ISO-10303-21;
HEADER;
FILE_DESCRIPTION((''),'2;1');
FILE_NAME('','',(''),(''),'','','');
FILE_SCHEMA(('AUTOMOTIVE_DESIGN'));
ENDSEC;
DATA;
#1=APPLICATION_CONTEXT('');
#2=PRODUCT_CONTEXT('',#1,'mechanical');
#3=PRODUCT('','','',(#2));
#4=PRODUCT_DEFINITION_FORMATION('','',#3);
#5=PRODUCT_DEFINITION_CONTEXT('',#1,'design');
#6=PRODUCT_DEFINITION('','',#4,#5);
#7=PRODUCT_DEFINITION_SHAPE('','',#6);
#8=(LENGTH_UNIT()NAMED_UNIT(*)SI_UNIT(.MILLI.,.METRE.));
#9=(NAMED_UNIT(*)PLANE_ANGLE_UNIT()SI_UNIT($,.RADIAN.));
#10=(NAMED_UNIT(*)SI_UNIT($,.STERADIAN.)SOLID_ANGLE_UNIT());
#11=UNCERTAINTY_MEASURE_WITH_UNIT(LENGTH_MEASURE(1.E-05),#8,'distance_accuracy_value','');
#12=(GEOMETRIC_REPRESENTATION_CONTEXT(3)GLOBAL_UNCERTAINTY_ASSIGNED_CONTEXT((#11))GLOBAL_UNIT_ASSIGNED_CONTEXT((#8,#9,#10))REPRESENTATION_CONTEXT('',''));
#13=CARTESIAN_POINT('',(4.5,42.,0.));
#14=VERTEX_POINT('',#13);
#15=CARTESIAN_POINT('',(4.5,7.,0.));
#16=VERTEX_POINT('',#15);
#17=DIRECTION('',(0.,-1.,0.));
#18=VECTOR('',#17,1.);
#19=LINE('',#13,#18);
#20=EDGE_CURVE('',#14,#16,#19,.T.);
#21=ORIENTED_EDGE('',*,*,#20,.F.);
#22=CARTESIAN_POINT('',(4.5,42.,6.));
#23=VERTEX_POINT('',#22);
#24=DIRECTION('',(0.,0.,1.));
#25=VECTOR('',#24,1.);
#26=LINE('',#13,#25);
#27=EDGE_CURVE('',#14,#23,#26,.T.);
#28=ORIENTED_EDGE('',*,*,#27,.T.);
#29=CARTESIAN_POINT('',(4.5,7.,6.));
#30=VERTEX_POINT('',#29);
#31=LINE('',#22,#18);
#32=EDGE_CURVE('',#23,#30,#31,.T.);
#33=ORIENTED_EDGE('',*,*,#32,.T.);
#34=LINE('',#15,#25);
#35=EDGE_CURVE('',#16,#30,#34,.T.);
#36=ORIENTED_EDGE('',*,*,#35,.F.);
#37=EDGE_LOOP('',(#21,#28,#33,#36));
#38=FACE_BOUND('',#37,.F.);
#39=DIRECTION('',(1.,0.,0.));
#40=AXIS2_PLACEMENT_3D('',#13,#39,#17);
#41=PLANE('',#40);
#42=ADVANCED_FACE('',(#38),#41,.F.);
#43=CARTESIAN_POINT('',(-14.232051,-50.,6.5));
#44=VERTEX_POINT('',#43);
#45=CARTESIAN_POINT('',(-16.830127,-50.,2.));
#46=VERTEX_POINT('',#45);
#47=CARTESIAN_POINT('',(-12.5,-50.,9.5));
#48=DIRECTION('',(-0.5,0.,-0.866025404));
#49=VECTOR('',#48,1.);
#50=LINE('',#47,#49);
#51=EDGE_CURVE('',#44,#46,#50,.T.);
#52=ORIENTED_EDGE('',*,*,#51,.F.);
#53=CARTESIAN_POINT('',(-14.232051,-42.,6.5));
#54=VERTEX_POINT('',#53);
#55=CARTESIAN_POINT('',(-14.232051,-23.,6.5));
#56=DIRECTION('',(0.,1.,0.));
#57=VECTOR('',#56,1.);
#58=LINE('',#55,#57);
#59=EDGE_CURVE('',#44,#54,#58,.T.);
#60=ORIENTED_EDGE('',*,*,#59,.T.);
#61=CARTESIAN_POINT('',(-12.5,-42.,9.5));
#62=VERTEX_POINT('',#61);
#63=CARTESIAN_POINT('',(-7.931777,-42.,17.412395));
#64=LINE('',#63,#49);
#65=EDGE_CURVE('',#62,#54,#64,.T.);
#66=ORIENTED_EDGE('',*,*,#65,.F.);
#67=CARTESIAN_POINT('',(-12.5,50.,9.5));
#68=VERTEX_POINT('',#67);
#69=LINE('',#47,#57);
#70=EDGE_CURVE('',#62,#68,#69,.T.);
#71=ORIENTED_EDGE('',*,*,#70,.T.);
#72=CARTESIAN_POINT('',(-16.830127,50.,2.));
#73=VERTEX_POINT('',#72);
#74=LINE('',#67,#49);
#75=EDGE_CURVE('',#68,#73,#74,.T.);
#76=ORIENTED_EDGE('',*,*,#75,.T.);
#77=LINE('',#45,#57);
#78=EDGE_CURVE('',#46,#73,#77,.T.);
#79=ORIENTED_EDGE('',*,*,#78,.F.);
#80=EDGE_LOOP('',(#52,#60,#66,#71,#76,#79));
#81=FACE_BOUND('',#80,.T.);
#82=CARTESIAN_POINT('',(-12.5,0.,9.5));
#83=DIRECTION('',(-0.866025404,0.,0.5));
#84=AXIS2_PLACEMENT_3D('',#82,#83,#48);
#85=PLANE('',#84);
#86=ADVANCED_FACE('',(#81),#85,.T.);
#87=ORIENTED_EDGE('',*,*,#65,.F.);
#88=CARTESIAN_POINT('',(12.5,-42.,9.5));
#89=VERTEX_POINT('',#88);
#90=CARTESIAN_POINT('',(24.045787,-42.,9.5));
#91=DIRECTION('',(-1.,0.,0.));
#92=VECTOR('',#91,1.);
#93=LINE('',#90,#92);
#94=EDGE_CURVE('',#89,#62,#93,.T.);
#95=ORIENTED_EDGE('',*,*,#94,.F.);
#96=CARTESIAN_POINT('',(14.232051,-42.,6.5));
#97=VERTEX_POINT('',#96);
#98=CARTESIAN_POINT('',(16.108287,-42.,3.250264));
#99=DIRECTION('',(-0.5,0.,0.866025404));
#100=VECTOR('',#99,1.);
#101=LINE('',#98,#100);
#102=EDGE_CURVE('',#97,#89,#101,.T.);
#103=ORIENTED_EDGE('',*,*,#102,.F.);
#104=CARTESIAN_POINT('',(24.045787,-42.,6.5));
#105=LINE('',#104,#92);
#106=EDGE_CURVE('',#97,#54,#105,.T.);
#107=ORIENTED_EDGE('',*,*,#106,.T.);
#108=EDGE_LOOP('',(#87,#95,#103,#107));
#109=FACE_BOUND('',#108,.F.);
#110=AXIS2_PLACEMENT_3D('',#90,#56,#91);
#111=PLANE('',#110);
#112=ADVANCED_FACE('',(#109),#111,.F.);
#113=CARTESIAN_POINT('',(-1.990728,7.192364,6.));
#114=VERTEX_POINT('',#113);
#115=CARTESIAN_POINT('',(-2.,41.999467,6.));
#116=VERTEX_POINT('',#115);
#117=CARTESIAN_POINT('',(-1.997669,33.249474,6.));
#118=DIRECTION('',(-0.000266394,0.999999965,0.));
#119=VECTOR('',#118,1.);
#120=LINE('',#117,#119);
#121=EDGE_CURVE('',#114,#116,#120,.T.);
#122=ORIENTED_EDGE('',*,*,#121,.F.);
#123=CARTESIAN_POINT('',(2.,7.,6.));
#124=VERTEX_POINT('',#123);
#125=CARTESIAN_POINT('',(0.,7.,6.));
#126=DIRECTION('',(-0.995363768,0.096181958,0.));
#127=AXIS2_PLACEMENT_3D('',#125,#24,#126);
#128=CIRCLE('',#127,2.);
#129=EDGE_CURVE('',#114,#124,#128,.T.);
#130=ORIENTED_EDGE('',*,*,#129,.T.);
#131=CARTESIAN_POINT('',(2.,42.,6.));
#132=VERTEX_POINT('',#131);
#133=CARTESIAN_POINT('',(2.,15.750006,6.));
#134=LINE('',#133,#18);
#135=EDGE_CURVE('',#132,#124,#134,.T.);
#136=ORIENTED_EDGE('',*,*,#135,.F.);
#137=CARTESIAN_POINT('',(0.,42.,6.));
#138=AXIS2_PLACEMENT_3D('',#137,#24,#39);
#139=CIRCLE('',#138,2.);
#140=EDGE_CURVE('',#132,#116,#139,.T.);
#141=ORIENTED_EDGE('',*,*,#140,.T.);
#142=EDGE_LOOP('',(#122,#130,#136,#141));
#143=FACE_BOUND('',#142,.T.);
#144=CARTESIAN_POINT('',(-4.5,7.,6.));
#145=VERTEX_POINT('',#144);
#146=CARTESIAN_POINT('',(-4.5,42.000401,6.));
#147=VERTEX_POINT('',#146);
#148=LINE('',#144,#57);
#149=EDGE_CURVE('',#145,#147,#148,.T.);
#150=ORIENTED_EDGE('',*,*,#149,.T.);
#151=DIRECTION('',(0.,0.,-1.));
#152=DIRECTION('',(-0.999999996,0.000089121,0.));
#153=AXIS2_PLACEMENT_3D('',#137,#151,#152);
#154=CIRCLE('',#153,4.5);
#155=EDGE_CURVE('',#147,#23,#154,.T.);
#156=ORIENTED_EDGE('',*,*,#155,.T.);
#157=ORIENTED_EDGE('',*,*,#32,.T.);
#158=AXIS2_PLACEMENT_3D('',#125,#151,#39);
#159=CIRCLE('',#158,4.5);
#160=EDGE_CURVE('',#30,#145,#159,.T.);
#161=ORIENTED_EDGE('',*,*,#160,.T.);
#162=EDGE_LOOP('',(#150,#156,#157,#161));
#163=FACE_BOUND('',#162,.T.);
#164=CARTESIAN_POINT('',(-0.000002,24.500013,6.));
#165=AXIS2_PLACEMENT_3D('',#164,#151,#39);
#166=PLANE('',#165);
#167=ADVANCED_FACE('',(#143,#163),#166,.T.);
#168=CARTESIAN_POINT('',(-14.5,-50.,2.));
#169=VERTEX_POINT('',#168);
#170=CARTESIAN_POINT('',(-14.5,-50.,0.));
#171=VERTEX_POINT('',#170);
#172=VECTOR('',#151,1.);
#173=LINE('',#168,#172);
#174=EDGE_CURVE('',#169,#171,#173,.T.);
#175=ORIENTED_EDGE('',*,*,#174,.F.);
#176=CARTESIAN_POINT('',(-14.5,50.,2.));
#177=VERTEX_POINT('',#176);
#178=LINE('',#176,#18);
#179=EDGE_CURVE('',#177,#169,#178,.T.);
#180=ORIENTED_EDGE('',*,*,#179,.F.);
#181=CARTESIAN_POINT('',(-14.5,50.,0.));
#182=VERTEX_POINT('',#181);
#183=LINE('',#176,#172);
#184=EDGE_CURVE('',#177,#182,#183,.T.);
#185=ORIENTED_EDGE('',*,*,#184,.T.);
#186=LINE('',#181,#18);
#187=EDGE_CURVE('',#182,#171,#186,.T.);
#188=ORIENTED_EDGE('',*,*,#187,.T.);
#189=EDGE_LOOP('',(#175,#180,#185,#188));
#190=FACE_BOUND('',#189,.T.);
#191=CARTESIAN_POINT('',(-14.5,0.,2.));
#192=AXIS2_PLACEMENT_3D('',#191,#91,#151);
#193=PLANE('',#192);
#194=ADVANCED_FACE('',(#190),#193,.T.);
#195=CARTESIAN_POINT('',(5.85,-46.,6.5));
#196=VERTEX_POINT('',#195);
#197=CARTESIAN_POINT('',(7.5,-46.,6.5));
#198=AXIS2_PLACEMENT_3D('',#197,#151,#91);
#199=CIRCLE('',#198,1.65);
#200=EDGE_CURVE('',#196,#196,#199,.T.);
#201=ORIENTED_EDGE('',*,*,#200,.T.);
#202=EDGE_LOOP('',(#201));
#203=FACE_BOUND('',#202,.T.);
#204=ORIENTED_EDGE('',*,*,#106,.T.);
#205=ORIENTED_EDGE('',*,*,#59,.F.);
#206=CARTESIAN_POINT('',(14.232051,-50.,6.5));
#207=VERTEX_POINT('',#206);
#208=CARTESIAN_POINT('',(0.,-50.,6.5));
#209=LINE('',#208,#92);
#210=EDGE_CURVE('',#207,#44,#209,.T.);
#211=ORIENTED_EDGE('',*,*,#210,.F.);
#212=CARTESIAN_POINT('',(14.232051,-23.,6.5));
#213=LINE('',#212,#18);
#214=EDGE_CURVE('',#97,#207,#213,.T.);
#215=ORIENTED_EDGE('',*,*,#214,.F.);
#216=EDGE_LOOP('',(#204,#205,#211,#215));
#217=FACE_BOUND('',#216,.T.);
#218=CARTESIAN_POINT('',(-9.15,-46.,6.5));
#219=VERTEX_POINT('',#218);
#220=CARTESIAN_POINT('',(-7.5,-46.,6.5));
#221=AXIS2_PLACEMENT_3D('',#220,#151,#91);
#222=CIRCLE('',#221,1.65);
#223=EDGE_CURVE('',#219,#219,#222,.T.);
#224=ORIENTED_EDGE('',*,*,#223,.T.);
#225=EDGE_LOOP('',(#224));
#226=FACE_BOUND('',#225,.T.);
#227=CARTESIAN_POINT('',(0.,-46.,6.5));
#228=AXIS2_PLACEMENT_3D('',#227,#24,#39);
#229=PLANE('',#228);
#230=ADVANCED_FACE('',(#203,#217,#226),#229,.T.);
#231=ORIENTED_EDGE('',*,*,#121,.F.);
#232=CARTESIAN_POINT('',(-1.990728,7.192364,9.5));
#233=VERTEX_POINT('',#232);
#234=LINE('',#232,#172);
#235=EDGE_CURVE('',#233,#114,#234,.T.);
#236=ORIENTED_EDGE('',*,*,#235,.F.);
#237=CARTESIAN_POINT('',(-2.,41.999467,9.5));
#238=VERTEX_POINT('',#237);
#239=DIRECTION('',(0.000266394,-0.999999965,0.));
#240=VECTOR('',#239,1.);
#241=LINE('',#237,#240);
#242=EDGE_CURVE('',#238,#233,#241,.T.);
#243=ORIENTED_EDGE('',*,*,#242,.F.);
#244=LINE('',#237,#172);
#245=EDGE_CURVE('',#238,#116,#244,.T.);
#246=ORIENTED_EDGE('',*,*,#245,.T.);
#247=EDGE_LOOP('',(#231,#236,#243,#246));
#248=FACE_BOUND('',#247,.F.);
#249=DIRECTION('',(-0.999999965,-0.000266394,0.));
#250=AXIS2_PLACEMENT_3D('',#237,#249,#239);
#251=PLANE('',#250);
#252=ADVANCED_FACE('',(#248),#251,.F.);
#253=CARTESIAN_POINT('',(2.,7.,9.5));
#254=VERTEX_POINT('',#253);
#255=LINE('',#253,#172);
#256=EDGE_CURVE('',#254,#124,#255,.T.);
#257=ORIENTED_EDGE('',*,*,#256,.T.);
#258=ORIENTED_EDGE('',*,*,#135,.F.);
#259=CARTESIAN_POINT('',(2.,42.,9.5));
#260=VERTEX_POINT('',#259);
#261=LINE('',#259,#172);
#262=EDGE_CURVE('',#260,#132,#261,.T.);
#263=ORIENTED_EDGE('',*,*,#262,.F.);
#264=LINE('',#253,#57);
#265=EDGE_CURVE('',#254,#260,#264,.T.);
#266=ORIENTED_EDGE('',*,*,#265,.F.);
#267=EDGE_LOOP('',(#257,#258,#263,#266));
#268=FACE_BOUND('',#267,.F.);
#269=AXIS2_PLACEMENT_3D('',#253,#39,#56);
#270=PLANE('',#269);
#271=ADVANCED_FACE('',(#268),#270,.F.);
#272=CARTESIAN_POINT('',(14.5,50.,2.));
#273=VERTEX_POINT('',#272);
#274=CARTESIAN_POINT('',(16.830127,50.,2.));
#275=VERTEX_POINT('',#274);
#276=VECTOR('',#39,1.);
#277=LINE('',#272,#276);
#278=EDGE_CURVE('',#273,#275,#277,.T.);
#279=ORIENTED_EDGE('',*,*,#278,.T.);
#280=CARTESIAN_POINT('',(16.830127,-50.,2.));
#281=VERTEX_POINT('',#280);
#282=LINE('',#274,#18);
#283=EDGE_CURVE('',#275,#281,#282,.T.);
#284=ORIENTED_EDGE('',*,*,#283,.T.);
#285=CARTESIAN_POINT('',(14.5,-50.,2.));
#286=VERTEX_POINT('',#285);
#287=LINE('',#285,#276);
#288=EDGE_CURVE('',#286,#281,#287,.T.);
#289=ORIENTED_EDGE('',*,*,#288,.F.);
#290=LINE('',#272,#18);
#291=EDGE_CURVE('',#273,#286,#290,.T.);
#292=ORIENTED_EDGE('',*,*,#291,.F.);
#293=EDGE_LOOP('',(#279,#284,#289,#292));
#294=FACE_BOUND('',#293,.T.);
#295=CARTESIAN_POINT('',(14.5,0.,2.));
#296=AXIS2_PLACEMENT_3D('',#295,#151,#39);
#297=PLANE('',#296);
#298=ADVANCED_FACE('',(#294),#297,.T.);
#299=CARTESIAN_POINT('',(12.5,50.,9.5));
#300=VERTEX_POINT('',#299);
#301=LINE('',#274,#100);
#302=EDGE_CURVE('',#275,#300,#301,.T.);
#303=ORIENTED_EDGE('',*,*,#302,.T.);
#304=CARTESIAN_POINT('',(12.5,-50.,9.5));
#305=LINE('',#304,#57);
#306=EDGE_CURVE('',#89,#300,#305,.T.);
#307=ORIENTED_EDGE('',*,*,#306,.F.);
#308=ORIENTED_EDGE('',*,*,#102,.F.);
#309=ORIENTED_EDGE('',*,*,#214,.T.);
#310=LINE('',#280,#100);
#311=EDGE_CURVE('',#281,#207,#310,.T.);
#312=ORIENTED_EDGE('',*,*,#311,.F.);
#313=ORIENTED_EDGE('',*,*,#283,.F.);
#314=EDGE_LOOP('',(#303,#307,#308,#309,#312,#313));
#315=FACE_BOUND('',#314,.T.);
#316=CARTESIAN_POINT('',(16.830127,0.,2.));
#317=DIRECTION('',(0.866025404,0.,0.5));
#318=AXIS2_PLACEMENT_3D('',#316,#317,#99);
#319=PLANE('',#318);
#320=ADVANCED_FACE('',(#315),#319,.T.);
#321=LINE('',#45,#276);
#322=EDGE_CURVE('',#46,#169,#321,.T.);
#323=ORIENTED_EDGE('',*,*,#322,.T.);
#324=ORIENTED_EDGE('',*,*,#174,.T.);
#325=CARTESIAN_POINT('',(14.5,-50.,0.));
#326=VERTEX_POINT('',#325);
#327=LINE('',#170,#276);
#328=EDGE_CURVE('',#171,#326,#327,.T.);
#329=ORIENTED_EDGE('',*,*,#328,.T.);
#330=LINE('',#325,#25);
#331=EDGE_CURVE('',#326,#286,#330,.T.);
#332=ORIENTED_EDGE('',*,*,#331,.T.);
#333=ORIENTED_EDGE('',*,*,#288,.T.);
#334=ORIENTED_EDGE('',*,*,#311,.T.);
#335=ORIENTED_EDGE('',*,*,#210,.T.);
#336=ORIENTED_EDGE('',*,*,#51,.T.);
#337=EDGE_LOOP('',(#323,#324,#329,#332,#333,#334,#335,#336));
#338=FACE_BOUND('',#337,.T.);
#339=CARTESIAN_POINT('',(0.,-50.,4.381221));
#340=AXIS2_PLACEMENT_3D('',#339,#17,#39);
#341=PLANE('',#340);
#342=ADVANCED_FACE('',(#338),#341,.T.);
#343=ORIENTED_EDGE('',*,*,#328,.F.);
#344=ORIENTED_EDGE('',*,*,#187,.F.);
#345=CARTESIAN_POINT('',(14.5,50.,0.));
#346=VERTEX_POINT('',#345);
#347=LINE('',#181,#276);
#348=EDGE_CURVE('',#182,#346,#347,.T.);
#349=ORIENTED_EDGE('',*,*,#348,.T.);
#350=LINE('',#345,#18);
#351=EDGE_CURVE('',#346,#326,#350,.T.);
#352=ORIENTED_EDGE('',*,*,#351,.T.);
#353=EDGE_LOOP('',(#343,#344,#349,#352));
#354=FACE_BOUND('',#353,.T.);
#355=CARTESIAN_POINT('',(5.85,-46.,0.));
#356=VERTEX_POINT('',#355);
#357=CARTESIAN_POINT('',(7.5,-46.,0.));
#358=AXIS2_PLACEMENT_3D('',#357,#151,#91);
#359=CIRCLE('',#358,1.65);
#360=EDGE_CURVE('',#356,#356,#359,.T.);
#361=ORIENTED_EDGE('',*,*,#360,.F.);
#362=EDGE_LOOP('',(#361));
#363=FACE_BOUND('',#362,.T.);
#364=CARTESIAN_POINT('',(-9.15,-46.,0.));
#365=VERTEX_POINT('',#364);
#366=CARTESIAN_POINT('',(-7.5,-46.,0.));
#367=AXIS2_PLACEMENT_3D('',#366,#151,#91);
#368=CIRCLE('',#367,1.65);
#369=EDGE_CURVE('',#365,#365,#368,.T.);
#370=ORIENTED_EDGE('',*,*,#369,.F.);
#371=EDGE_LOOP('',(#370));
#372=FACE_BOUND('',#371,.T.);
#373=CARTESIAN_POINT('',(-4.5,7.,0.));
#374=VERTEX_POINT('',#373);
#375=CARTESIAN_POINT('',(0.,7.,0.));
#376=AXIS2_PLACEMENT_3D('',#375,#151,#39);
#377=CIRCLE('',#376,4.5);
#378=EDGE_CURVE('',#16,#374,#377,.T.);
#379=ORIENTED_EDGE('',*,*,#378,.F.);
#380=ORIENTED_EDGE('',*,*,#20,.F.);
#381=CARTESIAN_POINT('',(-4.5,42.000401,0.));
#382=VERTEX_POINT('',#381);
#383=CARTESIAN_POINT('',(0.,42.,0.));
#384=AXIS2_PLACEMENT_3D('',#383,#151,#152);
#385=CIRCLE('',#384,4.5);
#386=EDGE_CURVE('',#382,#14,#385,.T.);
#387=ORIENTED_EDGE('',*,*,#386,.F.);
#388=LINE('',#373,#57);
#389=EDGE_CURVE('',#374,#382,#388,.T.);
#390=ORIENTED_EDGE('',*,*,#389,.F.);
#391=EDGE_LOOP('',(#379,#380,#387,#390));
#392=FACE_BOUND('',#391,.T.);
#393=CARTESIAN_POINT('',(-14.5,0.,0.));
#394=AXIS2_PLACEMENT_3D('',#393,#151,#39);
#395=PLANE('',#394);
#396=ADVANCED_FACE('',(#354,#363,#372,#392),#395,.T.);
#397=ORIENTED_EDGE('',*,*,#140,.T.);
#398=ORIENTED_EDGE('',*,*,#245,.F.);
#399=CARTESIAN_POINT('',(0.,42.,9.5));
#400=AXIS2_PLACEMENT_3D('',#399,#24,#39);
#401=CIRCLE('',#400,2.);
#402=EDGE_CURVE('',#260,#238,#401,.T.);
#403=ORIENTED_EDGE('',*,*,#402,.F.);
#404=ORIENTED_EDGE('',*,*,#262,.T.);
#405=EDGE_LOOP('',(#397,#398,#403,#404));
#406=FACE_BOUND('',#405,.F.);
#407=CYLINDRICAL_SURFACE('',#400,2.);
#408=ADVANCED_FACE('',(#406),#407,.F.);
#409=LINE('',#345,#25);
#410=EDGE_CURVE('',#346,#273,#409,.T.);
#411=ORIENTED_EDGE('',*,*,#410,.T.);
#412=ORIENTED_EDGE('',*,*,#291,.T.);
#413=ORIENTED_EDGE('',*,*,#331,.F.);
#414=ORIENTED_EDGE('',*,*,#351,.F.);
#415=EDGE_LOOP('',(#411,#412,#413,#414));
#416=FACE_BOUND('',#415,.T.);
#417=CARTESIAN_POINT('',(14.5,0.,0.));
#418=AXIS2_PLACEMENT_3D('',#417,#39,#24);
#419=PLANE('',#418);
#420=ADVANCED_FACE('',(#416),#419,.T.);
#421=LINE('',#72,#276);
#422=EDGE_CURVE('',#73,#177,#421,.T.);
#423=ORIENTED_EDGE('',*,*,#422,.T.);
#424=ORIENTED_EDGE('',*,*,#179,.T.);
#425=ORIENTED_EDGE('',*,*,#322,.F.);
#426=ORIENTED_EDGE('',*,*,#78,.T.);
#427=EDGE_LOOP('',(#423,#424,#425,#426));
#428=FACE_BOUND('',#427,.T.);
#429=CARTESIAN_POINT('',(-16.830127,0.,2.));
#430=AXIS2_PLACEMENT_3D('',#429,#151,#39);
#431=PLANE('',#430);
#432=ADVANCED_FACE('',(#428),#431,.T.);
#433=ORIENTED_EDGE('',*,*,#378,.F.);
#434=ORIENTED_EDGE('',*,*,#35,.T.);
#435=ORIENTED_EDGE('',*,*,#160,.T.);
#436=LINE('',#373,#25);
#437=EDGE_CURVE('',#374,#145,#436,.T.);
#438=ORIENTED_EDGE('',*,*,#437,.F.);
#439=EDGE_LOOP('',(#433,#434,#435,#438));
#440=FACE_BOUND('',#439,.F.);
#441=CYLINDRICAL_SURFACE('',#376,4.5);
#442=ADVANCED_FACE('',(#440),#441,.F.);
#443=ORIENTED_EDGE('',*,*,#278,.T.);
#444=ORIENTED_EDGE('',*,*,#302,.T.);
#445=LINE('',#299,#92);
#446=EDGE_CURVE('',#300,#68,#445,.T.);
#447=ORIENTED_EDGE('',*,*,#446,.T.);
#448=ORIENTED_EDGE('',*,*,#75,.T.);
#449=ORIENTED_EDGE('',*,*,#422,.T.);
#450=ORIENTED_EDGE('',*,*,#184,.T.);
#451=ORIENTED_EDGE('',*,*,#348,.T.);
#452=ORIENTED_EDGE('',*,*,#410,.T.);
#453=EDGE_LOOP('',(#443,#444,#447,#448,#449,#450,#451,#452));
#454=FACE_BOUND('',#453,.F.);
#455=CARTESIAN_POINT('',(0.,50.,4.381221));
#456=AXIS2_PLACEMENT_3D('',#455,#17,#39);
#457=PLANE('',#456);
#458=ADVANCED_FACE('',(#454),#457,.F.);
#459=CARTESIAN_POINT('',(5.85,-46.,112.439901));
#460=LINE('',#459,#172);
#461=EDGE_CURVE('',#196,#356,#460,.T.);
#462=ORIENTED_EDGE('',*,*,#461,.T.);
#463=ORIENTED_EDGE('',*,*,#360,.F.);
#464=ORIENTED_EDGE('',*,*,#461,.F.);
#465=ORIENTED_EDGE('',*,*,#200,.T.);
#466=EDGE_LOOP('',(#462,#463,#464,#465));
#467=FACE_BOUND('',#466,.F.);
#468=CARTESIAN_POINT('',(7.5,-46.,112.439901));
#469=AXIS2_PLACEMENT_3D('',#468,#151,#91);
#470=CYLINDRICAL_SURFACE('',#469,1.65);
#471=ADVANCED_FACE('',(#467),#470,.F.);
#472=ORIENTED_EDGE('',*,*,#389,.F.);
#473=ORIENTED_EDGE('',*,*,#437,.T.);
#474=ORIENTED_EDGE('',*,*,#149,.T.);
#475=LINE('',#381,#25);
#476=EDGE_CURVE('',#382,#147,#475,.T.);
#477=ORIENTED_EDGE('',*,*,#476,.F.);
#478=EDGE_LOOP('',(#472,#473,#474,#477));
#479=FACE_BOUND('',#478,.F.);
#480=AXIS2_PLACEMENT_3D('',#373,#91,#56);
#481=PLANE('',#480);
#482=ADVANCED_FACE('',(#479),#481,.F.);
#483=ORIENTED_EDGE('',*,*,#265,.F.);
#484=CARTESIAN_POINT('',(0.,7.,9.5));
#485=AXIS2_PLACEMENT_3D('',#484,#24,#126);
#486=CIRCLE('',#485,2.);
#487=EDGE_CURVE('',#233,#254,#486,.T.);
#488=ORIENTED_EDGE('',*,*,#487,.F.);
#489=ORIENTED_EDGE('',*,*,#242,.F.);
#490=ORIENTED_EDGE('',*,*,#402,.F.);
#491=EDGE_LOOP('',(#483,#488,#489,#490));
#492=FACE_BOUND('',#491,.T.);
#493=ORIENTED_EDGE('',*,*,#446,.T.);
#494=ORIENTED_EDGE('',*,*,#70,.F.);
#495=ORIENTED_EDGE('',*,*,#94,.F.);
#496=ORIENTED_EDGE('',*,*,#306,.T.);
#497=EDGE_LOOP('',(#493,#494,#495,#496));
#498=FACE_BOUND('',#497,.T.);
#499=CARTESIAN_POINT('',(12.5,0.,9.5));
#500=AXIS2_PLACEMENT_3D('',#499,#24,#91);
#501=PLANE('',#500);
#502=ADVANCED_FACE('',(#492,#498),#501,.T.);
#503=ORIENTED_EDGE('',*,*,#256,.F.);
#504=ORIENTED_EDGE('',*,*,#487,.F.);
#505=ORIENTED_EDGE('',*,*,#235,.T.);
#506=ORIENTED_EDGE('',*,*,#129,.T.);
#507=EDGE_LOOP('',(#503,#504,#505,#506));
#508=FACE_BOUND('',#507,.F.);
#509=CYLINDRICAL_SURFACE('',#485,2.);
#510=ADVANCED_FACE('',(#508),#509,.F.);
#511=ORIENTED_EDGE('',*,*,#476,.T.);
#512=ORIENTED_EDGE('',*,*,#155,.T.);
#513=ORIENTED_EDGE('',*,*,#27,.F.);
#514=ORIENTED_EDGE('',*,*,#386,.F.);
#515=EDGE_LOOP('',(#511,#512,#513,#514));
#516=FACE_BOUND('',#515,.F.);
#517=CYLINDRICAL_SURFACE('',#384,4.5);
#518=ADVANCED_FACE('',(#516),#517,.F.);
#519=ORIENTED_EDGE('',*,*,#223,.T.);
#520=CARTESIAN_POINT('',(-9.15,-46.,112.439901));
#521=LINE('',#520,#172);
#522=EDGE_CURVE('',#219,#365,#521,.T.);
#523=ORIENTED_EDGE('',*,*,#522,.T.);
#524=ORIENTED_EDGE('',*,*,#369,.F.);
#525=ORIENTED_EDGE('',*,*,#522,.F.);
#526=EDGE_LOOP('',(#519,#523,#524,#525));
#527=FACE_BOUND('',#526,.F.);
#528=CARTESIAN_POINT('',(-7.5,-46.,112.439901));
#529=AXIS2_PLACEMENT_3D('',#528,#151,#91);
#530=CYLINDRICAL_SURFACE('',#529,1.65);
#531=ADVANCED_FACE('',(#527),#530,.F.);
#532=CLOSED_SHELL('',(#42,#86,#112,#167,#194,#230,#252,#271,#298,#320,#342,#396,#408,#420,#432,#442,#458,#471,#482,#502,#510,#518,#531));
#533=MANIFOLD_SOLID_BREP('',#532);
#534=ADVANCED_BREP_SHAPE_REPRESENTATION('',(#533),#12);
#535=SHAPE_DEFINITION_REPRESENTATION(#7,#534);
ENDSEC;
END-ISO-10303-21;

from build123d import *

# Parameters (mm, degrees)
F1_DEPTH   = 50
F1_FACE1_W = 25
F1_FACE1_H = 100
F3_DEPTH   = 6
F5_DEPTH   = 25
F6_W       = 25
F6_H       = 8
F7_DEPTH   = 3
F9_D       = 3.3


with BuildPart() as f1:
    # F0 (on Front) → F1 (new body, symmetric)
    with BuildSketch(Plane.XZ):
        Polygon((-16.8301270189, 2), (-14.5, 2), (-14.5, 0), (14.5, 0), (14.5, 2), (16.8301270189, 2), (12.5, 9.5), (-12.5, 9.5), align=None)
    extrude(amount=F1_DEPTH, both=True)

    # F2 (on face) + F1_face1 (on face) → F3 (cut)
    with BuildSketch(Plane(origin=(0, 0, 0), x_dir=(1, 0, 0), z_dir=(0, 0, -1))):
        with BuildLine():
            Line((4.5, -42), (4.5, -7))
            ThreePointArc((4.5, -7), (0, -2.5), (-4.5, -7))
            Line((-4.5, -7), (-4.5, -42))
            Line((-4.5, -42), (-4.5, -42.0004010455))
            ThreePointArc((-4.4999999821, -42.0004010455), (0.0002005227, -46.4999999955), (4.5, -42))
        make_face()
    with BuildSketch(Plane.XY.offset(9.5)):
        Rectangle(F1_FACE1_W, F1_FACE1_H)
    extrude(amount=-F3_DEPTH, dir=(0, 0, -1), mode=Mode.SUBTRACT)

    # F4 (on face) → F5 (cut)
    with BuildSketch(Plane.XY.offset(9.5)):
        with BuildLine():
            ThreePointArc((-1.9907275363, 7.1923639157), (-0.0962936325, 5.0023194609), (2, 7))
            ThreePointArc((2, 7), (0.0962936325, 8.9976805391), (-1.9907275363, 7.1923639157))
        make_face()
        with BuildLine():
            Line((2, 7), (2, 42))
            ThreePointArc((2, 42), (0.0002663937, 40.0000000177), (-1.999999929, 41.9994672126))
            Line((-1.999999929, 41.9994672126), (-1.9907275363, 7.1923639157))
            ThreePointArc((-1.9907275363, 7.1923639157), (0.0962936325, 8.9976805391), (2, 7))
        make_face()
        with BuildLine():
            ThreePointArc((-1.999999929, 41.9994672126), (0.0002663937, 40.0000000177), (2, 42))
            ThreePointArc((2, 42), (-0.0002663937, 43.9999999823), (-1.999999929, 41.9994672126))
        make_face()
    extrude(amount=-F5_DEPTH, mode=Mode.SUBTRACT)

    # F6 (on face) → F7 (cut)
    with BuildSketch(Plane.XY.offset(9.5)):
        with Locations((0, -46)):
            Rectangle(F6_W, F6_H)
        Polygon((-23.7841614955, -55.5199324694), (24.0457867705, -55.5199324694), (24.0457867705, -42), (12.5, -42), (12.5, -50), (-12.5, -50), (-12.5, -42), (-23.7841614955, -42), align=None)
    extrude(amount=-F7_DEPTH, mode=Mode.SUBTRACT)

    # F9 (through all)
    with Locations(Plane.XY.offset(6.5)):
        with Locations((-7.5, -46), (7.5, -46)):
            Hole(F9_D / 2)


solid = f1.part
